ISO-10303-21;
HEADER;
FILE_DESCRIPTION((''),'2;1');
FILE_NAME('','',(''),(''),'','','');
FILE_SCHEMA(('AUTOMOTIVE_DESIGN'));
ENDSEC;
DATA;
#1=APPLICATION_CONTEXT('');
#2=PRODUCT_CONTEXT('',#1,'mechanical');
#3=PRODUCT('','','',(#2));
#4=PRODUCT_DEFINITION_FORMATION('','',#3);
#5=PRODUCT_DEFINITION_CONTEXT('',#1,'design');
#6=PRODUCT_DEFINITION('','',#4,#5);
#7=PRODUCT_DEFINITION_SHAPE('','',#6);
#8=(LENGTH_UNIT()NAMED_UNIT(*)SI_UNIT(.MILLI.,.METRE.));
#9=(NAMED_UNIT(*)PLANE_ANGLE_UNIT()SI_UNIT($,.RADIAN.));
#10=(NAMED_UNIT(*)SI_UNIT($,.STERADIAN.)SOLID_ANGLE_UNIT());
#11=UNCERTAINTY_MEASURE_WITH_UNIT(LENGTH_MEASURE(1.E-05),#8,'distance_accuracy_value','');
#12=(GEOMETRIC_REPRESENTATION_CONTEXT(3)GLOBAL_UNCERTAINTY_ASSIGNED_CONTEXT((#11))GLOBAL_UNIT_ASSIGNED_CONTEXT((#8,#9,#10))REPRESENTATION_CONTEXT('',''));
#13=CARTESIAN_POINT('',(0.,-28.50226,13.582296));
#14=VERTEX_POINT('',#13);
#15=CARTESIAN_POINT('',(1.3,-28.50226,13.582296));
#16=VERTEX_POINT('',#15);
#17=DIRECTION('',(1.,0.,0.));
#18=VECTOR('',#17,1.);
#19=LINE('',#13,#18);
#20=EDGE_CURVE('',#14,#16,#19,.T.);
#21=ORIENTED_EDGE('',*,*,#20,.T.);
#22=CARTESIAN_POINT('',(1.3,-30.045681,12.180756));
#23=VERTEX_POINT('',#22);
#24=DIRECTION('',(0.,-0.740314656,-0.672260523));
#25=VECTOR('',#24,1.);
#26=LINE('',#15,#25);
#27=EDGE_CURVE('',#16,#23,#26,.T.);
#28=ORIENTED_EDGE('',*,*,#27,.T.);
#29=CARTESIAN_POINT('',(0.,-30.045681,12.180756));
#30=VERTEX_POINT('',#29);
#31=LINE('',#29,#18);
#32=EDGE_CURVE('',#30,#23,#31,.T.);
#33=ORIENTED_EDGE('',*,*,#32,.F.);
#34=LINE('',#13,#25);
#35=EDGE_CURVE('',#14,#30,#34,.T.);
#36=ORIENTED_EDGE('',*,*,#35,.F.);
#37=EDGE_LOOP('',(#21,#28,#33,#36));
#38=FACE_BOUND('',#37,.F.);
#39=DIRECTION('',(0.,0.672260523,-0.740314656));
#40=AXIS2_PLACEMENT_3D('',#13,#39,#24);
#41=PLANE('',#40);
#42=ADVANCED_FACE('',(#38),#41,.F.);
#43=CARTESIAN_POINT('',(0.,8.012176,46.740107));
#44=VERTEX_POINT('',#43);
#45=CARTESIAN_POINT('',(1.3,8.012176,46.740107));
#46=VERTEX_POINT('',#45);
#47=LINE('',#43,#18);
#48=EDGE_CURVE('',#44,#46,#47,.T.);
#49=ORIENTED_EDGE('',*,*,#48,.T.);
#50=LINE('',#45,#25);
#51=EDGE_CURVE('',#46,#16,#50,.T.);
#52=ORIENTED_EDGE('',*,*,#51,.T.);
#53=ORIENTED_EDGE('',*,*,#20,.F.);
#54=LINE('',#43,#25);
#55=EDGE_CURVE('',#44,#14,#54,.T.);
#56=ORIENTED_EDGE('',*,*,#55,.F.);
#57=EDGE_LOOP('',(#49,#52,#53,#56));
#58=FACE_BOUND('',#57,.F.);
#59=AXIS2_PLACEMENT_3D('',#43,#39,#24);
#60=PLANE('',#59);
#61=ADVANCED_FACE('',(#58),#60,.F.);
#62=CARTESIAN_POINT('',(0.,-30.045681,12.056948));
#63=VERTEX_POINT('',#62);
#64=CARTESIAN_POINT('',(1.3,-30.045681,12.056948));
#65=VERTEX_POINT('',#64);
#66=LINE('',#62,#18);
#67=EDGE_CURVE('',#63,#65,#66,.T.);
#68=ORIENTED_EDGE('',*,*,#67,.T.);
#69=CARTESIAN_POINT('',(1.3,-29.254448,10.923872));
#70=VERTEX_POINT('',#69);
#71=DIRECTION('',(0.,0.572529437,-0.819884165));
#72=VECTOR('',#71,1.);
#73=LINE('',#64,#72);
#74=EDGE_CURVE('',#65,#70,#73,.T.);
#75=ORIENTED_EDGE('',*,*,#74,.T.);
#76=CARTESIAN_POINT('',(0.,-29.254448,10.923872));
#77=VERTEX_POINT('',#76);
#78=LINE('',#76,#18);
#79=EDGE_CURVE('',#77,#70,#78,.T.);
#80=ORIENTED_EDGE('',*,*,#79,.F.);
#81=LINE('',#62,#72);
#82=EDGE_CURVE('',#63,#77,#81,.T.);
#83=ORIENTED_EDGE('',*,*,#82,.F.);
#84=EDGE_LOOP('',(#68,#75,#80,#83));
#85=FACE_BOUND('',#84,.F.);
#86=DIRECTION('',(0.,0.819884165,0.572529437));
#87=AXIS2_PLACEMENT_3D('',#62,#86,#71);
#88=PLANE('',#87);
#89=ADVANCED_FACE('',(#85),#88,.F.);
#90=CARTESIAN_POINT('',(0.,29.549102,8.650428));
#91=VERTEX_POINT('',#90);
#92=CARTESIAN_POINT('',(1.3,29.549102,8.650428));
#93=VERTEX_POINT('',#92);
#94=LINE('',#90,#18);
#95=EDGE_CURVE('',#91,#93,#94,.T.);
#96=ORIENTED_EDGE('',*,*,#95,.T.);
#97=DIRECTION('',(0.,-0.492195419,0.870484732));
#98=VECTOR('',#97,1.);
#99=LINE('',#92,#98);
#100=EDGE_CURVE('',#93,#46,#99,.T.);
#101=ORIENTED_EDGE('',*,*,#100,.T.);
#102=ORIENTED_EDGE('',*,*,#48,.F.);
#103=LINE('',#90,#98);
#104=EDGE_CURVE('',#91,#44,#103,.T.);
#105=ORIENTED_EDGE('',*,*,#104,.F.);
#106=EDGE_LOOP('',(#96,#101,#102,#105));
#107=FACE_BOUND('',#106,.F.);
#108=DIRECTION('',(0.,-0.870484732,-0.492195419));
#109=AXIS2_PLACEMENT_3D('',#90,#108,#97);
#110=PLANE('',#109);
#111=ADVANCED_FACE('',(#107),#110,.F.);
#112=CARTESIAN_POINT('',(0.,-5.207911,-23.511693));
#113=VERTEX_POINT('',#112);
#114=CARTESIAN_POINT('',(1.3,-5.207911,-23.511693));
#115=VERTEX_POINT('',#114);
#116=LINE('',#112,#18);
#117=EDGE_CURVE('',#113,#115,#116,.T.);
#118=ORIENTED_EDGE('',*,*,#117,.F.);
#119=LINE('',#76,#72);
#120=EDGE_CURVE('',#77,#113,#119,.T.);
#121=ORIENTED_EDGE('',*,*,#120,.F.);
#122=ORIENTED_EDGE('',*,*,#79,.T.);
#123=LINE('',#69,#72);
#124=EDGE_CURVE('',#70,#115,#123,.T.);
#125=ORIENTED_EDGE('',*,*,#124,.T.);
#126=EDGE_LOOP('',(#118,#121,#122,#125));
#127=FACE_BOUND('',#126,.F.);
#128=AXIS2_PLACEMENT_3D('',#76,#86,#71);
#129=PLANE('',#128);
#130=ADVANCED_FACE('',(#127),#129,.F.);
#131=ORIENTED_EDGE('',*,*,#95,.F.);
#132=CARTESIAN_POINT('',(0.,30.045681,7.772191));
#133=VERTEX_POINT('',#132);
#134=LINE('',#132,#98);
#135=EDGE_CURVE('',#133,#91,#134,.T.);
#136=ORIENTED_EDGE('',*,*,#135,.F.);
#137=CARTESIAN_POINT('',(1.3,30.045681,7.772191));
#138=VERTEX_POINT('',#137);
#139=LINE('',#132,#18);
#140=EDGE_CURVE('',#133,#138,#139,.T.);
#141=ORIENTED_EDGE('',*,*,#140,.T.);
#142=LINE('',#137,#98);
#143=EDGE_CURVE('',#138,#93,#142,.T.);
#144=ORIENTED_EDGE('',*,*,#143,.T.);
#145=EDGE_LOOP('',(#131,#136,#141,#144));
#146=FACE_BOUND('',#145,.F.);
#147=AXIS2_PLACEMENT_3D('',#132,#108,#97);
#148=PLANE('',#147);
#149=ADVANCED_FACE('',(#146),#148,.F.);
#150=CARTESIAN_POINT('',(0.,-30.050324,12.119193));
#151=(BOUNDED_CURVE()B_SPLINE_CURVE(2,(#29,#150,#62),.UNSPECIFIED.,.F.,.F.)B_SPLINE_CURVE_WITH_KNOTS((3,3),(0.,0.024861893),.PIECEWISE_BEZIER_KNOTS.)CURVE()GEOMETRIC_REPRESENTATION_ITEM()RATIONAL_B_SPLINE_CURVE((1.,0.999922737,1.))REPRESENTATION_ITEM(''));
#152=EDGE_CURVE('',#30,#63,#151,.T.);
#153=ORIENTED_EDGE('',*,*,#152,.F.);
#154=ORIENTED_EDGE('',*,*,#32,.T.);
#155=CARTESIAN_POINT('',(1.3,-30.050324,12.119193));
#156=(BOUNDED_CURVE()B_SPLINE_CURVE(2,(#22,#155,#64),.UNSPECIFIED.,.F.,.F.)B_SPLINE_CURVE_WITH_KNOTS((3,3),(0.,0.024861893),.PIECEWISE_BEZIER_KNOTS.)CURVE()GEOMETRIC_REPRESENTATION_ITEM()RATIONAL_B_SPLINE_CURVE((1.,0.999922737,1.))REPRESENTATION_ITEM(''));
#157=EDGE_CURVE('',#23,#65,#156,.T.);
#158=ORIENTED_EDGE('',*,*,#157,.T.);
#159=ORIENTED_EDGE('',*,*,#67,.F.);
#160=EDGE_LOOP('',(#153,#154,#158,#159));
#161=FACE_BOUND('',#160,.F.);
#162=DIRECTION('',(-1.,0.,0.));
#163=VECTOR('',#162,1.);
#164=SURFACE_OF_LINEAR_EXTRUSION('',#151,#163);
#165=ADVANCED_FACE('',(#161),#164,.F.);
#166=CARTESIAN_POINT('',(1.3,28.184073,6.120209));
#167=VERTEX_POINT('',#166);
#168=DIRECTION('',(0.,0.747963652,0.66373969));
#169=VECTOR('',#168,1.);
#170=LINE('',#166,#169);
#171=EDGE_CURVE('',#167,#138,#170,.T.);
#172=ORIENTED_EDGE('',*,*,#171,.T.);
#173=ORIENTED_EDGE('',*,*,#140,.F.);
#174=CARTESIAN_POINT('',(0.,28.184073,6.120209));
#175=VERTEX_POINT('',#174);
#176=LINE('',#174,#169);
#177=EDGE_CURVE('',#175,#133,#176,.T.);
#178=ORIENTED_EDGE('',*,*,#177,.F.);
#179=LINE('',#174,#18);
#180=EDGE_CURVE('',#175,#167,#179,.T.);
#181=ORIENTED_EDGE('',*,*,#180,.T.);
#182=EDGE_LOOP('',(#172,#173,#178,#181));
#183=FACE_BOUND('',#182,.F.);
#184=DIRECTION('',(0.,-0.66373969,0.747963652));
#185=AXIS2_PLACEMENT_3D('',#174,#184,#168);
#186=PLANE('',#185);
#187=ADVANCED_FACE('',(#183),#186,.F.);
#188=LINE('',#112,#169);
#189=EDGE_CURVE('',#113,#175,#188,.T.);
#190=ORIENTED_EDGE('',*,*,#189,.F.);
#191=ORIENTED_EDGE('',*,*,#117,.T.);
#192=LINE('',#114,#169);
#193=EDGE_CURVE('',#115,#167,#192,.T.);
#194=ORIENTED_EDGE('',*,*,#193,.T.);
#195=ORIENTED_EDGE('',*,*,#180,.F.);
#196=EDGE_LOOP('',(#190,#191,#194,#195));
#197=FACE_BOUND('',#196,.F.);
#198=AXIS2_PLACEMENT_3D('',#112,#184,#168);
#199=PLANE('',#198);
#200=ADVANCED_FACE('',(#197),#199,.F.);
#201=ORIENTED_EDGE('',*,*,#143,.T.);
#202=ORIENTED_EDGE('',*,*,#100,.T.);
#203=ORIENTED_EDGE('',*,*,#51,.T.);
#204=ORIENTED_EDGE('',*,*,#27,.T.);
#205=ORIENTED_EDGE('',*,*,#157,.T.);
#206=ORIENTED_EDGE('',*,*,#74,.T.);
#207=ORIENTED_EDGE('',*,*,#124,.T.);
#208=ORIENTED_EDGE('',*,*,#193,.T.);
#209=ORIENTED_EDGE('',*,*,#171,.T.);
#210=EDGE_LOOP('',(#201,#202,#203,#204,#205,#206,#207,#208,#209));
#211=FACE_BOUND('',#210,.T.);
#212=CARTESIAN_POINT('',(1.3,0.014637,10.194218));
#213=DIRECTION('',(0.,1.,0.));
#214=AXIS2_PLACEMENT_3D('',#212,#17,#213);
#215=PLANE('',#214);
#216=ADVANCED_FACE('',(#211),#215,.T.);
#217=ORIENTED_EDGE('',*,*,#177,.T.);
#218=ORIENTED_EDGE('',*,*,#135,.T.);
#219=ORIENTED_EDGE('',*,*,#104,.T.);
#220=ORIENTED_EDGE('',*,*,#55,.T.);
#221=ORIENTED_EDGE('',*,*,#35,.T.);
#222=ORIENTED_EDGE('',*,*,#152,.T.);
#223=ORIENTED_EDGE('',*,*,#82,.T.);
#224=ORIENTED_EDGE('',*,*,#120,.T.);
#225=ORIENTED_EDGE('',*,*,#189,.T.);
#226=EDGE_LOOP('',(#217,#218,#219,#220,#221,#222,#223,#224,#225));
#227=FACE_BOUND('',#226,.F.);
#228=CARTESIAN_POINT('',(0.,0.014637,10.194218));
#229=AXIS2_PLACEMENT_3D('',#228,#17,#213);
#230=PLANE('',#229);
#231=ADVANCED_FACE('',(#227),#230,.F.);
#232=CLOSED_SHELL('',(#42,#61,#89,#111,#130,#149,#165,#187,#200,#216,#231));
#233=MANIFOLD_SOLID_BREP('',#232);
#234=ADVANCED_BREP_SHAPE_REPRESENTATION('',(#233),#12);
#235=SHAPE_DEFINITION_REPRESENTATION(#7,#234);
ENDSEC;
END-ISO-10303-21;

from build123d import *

# Parameters (mm, degrees)
F1_DEPTH = 1.3


with BuildPart() as f1:
    # F0 (on Right) → F1 (new body)
    with BuildSketch(Plane.YZ):
        with BuildLine():
            Line((-28.5022601296, 13.5822960047), (-30.0456807017, 12.1807558462))
            add(Edge.make_bspline(
                [(-30.0456807017, 12.1807558462), (-30.050324092, 12.1191925835), (-30.0456807017, 12.056948002)],
                knots=[0, 0, 0, 0.0248618931, 0.0248618931, 0.0248618931], degree=2, weights=[1, 0.9999227368, 1]))
            Line((-30.0456807017, 12.056948002), (-29.2544480902, 10.9238724842))
            add(Edge.make_bspline(
                [(-29.2544480902, 10.9238724842), (-6.4495956437, -6.866929483), (28.1840730012, 6.1202085385)],
                knots=[0.2427638345, 0.2427638345, 0.2427638345, 2.7999505323, 2.7999505323, 2.7999505323], degree=2, weights=[1, 0.2880625196, 1]))
            Line((28.1840730012, 6.1202085385), (30.0456807017, 7.7721911115))
            Line((30.0456807017, 7.7721911115), (29.5491017408, 8.6504284676))
            add(Edge.make_bspline(
                [(29.5491017408, 8.6504284676), (25.3237843176, 12.7552573017), (2.096655059, 14.7285637166), (-21.1304741996, 16.7018701315), (-28.5022601296, 13.5822960047)],
                knots=[3.3365042971, 3.3365042971, 3.3365042971, 4.6549863272, 4.6549863272, 5.9734683573, 5.9734683573, 5.9734683573], degree=2, weights=[1, 0.7904573504, 1, 0.7904573504, 1]))
        make_face()
        with BuildLine():
            Line((8.01217556, 46.7401072383), (-28.5022601296, 13.5822960047))
            add(Edge.make_bspline(
                [(29.5491017408, 8.6504284676), (25.3237843176, 12.7552573017), (2.096655059, 14.7285637166), (-21.1304741996, 16.7018701315), (-28.5022601296, 13.5822960047)],
                knots=[3.3365042971, 3.3365042971, 3.3365042971, 4.6549863272, 4.6549863272, 5.9734683573, 5.9734683573, 5.9734683573], degree=2, weights=[1, 0.7904573504, 1, 0.7904573504, 1]))
            Line((29.5491017408, 8.6504284676), (8.01217556, 46.7401072383))
        make_face()
        with BuildLine():
            add(Edge.make_bspline(
                [(-29.2544480902, 10.9238724842), (-6.4495956437, -6.866929483), (28.1840730012, 6.1202085385)],
                knots=[0.2427638345, 0.2427638345, 0.2427638345, 2.7999505323, 2.7999505323, 2.7999505323], degree=2, weights=[1, 0.2880625196, 1]))
            Line((-29.2544480902, 10.9238724842), (-5.2079111338, -23.5116928816))
            Line((-5.2079111338, -23.5116928816), (28.1840730012, 6.1202085385))
        make_face()
    extrude(amount=F1_DEPTH)


solid = f1.part
